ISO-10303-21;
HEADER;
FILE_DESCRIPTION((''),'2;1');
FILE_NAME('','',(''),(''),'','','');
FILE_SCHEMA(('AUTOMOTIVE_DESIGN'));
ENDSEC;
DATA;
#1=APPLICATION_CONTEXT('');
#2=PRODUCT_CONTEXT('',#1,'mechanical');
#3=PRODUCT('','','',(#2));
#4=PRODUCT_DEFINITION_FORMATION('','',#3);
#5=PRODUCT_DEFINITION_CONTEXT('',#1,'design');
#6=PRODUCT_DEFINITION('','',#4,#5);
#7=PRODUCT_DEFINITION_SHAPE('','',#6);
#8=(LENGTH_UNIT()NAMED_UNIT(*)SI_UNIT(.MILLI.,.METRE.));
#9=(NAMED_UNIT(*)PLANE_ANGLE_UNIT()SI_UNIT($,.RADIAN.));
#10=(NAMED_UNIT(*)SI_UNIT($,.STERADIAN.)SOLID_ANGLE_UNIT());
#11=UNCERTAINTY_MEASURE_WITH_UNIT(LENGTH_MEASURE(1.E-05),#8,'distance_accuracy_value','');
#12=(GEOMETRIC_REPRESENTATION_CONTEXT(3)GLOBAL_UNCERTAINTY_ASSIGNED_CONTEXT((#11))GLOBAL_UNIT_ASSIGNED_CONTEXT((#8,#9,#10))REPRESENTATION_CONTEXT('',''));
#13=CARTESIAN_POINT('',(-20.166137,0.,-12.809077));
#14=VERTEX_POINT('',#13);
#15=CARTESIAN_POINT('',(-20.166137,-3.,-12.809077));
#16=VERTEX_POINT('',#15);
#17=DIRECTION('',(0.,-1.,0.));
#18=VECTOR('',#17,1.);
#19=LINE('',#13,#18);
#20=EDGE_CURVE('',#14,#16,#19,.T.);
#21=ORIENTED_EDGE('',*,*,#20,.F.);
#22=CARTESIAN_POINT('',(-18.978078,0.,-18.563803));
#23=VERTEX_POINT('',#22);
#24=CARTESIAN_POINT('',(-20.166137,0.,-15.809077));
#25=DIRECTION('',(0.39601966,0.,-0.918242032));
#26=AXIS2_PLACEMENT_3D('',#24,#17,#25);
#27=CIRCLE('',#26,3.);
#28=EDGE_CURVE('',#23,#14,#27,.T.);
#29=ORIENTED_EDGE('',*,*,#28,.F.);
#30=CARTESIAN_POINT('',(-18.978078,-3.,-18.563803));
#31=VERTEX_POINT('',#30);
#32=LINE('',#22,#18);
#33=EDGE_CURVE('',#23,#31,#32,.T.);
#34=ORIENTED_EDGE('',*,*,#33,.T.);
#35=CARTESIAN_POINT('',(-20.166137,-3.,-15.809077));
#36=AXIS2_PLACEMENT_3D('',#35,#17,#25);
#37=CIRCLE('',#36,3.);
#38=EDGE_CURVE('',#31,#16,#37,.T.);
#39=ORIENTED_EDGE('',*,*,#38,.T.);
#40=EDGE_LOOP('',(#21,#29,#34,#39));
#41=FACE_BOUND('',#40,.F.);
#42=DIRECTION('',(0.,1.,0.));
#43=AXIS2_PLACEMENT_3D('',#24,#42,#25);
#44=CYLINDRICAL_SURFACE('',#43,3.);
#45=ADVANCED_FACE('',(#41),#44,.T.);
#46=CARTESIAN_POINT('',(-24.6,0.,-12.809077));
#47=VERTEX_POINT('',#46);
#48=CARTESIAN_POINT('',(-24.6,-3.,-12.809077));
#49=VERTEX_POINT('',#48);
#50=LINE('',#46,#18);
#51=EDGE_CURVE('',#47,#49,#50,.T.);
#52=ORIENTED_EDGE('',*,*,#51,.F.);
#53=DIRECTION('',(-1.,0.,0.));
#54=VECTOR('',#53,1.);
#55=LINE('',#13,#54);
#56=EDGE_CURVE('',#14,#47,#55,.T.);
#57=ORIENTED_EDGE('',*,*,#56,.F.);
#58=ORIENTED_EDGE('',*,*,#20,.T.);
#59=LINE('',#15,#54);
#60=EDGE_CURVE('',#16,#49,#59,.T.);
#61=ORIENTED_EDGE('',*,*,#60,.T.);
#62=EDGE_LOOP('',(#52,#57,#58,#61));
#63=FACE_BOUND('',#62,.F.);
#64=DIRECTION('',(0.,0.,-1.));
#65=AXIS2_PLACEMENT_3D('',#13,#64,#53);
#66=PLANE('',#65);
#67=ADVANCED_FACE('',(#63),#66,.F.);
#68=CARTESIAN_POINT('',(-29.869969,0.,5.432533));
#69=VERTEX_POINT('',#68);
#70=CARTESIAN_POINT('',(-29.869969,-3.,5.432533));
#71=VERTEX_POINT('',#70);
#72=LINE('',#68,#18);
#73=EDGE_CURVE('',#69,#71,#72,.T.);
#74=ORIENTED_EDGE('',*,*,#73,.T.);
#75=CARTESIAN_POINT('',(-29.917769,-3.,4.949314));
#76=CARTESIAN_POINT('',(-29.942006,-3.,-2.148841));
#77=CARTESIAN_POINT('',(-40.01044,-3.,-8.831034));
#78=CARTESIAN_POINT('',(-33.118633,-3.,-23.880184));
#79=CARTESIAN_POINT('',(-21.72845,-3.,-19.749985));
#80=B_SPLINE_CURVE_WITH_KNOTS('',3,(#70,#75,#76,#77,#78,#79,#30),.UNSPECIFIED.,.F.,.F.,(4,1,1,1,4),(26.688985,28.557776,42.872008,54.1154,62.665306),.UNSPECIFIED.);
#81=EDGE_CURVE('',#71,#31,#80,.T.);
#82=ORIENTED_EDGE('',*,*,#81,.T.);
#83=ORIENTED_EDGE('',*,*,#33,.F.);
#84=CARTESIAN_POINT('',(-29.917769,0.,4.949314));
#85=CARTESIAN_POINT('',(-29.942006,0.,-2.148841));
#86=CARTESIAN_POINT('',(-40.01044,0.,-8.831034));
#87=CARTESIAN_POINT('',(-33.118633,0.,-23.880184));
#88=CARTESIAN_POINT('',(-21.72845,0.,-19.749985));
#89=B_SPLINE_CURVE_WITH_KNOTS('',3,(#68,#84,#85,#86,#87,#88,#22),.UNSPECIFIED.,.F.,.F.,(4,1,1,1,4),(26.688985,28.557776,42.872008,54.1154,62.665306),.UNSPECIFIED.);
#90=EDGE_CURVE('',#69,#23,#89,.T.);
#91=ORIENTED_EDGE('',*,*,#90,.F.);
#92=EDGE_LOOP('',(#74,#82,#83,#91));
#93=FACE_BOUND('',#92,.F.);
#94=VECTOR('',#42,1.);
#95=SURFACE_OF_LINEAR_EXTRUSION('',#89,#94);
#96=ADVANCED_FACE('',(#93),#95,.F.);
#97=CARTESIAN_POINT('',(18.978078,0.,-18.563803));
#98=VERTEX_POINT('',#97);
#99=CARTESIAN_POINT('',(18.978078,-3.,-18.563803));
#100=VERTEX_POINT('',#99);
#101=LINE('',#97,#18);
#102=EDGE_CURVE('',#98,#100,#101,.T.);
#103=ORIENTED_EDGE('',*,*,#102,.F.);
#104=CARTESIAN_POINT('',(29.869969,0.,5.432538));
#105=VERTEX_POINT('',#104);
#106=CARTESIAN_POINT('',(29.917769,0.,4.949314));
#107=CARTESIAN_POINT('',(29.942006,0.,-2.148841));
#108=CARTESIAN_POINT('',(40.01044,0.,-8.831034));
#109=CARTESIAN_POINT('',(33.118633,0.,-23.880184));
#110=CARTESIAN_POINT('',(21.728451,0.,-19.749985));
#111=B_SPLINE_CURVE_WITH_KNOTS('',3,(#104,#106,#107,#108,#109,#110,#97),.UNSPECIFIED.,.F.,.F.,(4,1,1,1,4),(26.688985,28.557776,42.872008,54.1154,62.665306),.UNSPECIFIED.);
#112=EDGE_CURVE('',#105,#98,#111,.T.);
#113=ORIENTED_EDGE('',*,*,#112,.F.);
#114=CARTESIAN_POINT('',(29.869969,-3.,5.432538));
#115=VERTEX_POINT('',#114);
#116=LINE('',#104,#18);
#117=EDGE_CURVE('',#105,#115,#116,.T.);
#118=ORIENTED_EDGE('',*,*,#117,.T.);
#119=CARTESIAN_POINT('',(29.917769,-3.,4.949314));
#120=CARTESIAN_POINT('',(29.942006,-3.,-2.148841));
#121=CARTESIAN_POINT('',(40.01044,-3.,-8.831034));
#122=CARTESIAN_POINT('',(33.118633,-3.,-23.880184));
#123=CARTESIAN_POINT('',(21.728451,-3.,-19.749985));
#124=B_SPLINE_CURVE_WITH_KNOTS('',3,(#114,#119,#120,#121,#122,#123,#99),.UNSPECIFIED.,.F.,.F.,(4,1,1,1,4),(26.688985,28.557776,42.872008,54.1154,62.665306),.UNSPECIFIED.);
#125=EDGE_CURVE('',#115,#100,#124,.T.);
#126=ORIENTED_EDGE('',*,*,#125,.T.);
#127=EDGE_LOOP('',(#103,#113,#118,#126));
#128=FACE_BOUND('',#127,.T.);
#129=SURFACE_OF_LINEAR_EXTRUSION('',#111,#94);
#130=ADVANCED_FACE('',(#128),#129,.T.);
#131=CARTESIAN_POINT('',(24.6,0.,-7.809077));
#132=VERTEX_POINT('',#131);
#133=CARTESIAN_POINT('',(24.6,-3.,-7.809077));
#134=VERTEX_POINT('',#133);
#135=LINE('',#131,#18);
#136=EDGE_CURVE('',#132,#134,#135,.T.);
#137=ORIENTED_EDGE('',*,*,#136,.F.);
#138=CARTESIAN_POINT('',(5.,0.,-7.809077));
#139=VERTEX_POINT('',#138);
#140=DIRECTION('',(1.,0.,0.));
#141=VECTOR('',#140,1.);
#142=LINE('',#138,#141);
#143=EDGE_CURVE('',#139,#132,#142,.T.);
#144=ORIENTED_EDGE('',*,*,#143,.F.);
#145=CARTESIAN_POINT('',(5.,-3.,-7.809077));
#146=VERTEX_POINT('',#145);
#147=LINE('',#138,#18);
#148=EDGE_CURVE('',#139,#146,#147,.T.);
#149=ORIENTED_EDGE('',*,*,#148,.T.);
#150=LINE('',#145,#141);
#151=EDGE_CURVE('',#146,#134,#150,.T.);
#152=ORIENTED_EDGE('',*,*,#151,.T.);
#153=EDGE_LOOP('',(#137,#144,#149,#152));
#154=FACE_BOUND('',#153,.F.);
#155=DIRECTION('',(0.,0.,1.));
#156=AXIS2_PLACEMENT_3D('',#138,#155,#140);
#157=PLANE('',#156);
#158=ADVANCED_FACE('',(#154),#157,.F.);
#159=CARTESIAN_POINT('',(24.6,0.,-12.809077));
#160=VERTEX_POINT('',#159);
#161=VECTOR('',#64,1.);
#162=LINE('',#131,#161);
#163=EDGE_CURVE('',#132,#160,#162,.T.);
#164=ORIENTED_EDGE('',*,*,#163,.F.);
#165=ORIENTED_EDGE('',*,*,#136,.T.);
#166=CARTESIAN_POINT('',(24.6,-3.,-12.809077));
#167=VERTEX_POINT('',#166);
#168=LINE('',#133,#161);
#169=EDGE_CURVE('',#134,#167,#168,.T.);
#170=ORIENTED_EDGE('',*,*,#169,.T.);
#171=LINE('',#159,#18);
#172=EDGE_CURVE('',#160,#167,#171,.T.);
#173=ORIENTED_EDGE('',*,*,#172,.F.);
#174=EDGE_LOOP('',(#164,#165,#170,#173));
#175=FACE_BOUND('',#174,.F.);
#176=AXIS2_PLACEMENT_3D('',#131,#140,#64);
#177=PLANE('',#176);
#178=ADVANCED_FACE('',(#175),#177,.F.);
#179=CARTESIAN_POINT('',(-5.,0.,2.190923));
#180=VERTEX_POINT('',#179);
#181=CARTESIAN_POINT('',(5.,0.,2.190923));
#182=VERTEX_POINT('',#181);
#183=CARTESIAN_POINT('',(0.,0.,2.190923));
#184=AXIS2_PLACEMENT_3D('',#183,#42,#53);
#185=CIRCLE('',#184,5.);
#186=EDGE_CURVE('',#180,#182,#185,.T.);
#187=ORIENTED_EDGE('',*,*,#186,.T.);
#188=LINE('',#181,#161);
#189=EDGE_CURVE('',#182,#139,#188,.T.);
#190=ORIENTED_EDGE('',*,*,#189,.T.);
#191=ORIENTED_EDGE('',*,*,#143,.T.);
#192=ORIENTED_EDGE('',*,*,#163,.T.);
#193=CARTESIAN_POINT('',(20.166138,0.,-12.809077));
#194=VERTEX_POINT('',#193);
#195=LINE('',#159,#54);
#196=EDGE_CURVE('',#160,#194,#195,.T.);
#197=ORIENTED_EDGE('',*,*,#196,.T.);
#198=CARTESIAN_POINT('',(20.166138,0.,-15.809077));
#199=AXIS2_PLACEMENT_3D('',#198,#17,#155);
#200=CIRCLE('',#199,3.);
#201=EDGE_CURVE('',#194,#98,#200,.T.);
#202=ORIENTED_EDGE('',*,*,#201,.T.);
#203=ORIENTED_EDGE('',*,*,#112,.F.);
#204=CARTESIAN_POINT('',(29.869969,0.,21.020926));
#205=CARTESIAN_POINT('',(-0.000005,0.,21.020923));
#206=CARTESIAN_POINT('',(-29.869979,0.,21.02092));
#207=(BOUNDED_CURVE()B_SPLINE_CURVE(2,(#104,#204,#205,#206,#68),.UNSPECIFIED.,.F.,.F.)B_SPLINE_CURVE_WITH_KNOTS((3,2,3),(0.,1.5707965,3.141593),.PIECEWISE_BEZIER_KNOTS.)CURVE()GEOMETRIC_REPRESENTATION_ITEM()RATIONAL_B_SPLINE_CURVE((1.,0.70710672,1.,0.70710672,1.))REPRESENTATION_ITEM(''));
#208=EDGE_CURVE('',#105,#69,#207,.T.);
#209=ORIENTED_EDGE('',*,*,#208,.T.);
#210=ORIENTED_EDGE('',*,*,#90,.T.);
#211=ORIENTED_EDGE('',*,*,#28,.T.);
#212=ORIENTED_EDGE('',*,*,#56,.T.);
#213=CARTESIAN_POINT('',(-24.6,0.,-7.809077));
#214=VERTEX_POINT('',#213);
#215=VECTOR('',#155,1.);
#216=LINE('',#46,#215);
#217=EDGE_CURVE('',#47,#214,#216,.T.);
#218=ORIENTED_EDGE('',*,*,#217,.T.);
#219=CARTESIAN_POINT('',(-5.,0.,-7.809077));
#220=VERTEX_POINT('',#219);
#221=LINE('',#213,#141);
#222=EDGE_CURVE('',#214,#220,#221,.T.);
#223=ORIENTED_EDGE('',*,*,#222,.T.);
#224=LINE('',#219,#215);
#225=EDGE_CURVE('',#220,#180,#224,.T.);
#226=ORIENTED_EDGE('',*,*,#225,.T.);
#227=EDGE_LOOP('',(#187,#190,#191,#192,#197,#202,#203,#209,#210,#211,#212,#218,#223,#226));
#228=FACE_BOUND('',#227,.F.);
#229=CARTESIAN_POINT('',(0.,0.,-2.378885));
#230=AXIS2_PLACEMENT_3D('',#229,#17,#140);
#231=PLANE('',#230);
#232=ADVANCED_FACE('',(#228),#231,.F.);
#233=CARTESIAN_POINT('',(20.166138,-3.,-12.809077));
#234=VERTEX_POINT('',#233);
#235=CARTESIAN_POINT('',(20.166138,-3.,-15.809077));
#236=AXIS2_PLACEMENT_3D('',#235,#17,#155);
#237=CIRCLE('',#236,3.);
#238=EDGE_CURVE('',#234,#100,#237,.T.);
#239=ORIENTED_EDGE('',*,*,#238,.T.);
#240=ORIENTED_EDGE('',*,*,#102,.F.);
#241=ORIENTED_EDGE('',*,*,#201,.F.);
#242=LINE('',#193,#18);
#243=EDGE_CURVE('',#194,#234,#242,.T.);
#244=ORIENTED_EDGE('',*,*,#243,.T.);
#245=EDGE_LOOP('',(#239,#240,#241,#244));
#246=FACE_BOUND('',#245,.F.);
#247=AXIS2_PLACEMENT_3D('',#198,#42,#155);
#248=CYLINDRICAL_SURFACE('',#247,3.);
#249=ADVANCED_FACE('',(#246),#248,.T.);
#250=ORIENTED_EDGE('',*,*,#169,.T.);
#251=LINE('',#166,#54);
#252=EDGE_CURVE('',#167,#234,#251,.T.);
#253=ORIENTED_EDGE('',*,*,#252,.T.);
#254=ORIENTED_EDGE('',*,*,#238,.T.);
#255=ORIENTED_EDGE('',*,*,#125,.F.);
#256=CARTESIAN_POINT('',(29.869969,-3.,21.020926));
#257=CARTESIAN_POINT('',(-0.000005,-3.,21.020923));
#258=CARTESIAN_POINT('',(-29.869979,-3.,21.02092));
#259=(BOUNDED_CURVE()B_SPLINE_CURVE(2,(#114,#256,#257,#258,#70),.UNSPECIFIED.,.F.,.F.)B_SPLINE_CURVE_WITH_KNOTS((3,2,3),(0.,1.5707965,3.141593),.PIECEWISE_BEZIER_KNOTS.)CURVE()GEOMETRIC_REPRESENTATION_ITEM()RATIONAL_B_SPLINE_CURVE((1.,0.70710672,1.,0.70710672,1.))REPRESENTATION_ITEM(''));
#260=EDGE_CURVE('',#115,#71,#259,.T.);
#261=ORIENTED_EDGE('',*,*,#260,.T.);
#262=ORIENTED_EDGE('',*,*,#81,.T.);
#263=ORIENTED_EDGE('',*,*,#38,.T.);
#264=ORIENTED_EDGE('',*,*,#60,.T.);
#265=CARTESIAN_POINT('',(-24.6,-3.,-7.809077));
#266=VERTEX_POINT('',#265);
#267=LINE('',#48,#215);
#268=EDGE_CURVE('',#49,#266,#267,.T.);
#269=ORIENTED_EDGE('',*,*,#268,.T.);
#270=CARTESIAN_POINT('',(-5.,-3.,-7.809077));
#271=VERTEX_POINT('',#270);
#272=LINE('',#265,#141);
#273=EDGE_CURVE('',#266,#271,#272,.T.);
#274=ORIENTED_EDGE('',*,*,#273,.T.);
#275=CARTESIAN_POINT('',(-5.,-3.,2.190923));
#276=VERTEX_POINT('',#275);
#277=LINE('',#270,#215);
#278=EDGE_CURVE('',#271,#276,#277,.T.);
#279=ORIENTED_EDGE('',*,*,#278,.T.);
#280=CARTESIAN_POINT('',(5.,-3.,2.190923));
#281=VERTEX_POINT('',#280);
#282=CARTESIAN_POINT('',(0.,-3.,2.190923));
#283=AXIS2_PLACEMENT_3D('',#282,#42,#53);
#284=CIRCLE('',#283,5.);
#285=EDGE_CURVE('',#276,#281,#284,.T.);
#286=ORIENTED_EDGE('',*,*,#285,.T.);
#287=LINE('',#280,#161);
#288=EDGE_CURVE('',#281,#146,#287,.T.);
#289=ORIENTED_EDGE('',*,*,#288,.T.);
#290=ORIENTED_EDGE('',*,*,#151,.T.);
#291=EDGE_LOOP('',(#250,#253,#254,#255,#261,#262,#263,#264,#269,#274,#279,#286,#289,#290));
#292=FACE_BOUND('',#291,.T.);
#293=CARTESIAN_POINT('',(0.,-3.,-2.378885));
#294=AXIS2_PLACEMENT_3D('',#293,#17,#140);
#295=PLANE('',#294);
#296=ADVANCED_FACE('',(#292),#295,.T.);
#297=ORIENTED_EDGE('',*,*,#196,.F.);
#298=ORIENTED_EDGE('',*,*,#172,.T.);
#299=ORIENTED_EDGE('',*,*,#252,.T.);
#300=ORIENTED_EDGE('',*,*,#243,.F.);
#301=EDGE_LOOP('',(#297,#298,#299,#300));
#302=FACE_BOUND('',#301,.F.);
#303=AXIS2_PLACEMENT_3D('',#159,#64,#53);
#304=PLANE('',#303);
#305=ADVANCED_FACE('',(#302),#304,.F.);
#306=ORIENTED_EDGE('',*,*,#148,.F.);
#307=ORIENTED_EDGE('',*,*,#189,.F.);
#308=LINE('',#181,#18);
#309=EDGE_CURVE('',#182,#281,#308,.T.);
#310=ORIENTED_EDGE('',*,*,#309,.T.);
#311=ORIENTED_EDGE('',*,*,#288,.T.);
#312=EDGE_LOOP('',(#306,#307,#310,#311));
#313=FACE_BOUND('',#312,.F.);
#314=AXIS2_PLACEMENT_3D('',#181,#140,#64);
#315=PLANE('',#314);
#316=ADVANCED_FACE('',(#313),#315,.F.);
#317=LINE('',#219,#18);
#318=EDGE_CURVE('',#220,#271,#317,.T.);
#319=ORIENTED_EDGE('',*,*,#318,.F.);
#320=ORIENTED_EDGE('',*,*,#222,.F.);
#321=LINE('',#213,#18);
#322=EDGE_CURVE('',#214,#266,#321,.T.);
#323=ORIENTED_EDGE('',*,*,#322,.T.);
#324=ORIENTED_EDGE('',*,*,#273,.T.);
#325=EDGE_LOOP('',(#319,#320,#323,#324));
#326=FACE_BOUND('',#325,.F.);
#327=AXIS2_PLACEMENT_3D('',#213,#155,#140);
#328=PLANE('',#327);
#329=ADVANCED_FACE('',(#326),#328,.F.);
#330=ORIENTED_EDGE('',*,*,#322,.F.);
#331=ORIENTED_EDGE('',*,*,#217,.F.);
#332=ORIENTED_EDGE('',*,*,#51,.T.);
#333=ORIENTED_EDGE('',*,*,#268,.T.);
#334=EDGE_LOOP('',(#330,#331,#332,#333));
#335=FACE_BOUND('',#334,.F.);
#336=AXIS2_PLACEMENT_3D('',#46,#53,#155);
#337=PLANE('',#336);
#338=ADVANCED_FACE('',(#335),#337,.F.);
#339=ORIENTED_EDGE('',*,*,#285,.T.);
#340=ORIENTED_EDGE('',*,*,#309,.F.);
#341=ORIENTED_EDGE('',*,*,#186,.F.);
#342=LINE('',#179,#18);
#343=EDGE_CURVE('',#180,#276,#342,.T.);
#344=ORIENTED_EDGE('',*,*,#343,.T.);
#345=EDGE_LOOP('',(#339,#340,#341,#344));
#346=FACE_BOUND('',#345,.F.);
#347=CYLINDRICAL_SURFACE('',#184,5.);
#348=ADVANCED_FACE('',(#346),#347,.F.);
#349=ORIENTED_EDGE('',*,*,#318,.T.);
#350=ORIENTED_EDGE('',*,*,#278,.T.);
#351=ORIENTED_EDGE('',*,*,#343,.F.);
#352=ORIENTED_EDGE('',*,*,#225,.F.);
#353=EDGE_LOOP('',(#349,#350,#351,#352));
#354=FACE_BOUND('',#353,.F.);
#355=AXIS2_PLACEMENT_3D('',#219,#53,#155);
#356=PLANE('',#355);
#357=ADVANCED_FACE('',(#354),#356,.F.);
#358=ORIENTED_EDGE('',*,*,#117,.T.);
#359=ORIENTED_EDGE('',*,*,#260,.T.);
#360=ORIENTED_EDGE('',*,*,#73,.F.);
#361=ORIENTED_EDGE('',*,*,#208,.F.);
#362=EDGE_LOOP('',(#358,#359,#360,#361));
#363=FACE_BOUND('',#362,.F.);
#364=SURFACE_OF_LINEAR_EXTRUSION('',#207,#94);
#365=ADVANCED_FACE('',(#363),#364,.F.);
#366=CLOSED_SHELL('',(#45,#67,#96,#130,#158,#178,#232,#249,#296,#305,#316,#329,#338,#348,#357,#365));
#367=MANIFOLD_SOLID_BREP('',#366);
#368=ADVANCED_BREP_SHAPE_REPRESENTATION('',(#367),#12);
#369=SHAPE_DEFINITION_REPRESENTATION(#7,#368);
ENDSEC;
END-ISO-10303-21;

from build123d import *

# Parameters (mm, degrees)
F1_DEPTH = 3


# Not quite as in the source:
# - ends of sketch curves that miss each other by under 0.0002 mm in the source are joined
# - the dataset's text gives a spline's control points without its knots; the knots are read off the source's solid


with BuildPart() as f1:
    # F0 (on Front) → F1 (new body)
    with BuildSketch(Plane.XZ):
        with BuildLine():
            Line((-20.166137, -12.809077), (-24.6, -12.809077))
            Line((-24.6, -12.809077), (-24.6, -7.809077))
            Line((-24.6, -7.809077), (-5, -7.809077))
            Line((-5, -7.809077), (-5, 2.190923))
            ThreePointArc((-5, 2.190923), (0, 7.190923), (5, 2.190923))
            Line((5, 2.190923), (5, -7.809077))
            Line((5, -7.809077), (24.6, -7.809077))
            Line((24.6, -7.809077), (24.6, -12.809077))
            Line((24.6, -12.809077), (20.166138, -12.809077))
            ThreePointArc((20.166138, -12.809077), (17.2280963794, -15.2025199657), (18.9780781253, -18.5638027094))
            add(Edge.make_bspline(
                [(29.869969, 5.432538), (29.917769, 4.949314), (29.942006, -2.148841), (40.01044, -8.831034), (33.118633, -23.880184), (21.728451, -19.749985), (18.9780781253, -18.5638027094)],
                knots=[26.688985, 26.688985, 26.688985, 26.688985, 28.557776, 42.872008, 54.1154, 62.665306, 62.665306, 62.665306, 62.665306], degree=3))
            add(Edge.make_bspline(
                [(29.869969, 5.432538), (29.869969, 21.0209257), (-5.1736e-06, 21.020923), (-29.8699793473, 21.0209203), (-29.869969, 5.4325326)],
                knots=[0, 0, 0, 1.5707965, 1.5707965, 3.141593, 3.141593, 3.141593], degree=2, weights=[1, 0.7071067199, 1, 0.7071067199, 1]))
            add(Edge.make_bspline(
                [(-29.869969, 5.4325326), (-29.917769, 4.949314), (-29.942006, -2.148841), (-40.01044, -8.831034), (-33.118633, -23.880184), (-21.72845, -19.749985), (-18.978078, -18.563803)],
                knots=[26.688985, 26.688985, 26.688985, 26.688985, 28.557776, 42.872008, 54.1154, 62.665306, 62.665306, 62.665306, 62.665306], degree=3))
            ThreePointArc((-18.978078, -18.563803), (-17.2280952866, -15.2025204153), (-20.166137, -12.809077))
        make_face()
    extrude(amount=F1_DEPTH)


solid = f1.part
